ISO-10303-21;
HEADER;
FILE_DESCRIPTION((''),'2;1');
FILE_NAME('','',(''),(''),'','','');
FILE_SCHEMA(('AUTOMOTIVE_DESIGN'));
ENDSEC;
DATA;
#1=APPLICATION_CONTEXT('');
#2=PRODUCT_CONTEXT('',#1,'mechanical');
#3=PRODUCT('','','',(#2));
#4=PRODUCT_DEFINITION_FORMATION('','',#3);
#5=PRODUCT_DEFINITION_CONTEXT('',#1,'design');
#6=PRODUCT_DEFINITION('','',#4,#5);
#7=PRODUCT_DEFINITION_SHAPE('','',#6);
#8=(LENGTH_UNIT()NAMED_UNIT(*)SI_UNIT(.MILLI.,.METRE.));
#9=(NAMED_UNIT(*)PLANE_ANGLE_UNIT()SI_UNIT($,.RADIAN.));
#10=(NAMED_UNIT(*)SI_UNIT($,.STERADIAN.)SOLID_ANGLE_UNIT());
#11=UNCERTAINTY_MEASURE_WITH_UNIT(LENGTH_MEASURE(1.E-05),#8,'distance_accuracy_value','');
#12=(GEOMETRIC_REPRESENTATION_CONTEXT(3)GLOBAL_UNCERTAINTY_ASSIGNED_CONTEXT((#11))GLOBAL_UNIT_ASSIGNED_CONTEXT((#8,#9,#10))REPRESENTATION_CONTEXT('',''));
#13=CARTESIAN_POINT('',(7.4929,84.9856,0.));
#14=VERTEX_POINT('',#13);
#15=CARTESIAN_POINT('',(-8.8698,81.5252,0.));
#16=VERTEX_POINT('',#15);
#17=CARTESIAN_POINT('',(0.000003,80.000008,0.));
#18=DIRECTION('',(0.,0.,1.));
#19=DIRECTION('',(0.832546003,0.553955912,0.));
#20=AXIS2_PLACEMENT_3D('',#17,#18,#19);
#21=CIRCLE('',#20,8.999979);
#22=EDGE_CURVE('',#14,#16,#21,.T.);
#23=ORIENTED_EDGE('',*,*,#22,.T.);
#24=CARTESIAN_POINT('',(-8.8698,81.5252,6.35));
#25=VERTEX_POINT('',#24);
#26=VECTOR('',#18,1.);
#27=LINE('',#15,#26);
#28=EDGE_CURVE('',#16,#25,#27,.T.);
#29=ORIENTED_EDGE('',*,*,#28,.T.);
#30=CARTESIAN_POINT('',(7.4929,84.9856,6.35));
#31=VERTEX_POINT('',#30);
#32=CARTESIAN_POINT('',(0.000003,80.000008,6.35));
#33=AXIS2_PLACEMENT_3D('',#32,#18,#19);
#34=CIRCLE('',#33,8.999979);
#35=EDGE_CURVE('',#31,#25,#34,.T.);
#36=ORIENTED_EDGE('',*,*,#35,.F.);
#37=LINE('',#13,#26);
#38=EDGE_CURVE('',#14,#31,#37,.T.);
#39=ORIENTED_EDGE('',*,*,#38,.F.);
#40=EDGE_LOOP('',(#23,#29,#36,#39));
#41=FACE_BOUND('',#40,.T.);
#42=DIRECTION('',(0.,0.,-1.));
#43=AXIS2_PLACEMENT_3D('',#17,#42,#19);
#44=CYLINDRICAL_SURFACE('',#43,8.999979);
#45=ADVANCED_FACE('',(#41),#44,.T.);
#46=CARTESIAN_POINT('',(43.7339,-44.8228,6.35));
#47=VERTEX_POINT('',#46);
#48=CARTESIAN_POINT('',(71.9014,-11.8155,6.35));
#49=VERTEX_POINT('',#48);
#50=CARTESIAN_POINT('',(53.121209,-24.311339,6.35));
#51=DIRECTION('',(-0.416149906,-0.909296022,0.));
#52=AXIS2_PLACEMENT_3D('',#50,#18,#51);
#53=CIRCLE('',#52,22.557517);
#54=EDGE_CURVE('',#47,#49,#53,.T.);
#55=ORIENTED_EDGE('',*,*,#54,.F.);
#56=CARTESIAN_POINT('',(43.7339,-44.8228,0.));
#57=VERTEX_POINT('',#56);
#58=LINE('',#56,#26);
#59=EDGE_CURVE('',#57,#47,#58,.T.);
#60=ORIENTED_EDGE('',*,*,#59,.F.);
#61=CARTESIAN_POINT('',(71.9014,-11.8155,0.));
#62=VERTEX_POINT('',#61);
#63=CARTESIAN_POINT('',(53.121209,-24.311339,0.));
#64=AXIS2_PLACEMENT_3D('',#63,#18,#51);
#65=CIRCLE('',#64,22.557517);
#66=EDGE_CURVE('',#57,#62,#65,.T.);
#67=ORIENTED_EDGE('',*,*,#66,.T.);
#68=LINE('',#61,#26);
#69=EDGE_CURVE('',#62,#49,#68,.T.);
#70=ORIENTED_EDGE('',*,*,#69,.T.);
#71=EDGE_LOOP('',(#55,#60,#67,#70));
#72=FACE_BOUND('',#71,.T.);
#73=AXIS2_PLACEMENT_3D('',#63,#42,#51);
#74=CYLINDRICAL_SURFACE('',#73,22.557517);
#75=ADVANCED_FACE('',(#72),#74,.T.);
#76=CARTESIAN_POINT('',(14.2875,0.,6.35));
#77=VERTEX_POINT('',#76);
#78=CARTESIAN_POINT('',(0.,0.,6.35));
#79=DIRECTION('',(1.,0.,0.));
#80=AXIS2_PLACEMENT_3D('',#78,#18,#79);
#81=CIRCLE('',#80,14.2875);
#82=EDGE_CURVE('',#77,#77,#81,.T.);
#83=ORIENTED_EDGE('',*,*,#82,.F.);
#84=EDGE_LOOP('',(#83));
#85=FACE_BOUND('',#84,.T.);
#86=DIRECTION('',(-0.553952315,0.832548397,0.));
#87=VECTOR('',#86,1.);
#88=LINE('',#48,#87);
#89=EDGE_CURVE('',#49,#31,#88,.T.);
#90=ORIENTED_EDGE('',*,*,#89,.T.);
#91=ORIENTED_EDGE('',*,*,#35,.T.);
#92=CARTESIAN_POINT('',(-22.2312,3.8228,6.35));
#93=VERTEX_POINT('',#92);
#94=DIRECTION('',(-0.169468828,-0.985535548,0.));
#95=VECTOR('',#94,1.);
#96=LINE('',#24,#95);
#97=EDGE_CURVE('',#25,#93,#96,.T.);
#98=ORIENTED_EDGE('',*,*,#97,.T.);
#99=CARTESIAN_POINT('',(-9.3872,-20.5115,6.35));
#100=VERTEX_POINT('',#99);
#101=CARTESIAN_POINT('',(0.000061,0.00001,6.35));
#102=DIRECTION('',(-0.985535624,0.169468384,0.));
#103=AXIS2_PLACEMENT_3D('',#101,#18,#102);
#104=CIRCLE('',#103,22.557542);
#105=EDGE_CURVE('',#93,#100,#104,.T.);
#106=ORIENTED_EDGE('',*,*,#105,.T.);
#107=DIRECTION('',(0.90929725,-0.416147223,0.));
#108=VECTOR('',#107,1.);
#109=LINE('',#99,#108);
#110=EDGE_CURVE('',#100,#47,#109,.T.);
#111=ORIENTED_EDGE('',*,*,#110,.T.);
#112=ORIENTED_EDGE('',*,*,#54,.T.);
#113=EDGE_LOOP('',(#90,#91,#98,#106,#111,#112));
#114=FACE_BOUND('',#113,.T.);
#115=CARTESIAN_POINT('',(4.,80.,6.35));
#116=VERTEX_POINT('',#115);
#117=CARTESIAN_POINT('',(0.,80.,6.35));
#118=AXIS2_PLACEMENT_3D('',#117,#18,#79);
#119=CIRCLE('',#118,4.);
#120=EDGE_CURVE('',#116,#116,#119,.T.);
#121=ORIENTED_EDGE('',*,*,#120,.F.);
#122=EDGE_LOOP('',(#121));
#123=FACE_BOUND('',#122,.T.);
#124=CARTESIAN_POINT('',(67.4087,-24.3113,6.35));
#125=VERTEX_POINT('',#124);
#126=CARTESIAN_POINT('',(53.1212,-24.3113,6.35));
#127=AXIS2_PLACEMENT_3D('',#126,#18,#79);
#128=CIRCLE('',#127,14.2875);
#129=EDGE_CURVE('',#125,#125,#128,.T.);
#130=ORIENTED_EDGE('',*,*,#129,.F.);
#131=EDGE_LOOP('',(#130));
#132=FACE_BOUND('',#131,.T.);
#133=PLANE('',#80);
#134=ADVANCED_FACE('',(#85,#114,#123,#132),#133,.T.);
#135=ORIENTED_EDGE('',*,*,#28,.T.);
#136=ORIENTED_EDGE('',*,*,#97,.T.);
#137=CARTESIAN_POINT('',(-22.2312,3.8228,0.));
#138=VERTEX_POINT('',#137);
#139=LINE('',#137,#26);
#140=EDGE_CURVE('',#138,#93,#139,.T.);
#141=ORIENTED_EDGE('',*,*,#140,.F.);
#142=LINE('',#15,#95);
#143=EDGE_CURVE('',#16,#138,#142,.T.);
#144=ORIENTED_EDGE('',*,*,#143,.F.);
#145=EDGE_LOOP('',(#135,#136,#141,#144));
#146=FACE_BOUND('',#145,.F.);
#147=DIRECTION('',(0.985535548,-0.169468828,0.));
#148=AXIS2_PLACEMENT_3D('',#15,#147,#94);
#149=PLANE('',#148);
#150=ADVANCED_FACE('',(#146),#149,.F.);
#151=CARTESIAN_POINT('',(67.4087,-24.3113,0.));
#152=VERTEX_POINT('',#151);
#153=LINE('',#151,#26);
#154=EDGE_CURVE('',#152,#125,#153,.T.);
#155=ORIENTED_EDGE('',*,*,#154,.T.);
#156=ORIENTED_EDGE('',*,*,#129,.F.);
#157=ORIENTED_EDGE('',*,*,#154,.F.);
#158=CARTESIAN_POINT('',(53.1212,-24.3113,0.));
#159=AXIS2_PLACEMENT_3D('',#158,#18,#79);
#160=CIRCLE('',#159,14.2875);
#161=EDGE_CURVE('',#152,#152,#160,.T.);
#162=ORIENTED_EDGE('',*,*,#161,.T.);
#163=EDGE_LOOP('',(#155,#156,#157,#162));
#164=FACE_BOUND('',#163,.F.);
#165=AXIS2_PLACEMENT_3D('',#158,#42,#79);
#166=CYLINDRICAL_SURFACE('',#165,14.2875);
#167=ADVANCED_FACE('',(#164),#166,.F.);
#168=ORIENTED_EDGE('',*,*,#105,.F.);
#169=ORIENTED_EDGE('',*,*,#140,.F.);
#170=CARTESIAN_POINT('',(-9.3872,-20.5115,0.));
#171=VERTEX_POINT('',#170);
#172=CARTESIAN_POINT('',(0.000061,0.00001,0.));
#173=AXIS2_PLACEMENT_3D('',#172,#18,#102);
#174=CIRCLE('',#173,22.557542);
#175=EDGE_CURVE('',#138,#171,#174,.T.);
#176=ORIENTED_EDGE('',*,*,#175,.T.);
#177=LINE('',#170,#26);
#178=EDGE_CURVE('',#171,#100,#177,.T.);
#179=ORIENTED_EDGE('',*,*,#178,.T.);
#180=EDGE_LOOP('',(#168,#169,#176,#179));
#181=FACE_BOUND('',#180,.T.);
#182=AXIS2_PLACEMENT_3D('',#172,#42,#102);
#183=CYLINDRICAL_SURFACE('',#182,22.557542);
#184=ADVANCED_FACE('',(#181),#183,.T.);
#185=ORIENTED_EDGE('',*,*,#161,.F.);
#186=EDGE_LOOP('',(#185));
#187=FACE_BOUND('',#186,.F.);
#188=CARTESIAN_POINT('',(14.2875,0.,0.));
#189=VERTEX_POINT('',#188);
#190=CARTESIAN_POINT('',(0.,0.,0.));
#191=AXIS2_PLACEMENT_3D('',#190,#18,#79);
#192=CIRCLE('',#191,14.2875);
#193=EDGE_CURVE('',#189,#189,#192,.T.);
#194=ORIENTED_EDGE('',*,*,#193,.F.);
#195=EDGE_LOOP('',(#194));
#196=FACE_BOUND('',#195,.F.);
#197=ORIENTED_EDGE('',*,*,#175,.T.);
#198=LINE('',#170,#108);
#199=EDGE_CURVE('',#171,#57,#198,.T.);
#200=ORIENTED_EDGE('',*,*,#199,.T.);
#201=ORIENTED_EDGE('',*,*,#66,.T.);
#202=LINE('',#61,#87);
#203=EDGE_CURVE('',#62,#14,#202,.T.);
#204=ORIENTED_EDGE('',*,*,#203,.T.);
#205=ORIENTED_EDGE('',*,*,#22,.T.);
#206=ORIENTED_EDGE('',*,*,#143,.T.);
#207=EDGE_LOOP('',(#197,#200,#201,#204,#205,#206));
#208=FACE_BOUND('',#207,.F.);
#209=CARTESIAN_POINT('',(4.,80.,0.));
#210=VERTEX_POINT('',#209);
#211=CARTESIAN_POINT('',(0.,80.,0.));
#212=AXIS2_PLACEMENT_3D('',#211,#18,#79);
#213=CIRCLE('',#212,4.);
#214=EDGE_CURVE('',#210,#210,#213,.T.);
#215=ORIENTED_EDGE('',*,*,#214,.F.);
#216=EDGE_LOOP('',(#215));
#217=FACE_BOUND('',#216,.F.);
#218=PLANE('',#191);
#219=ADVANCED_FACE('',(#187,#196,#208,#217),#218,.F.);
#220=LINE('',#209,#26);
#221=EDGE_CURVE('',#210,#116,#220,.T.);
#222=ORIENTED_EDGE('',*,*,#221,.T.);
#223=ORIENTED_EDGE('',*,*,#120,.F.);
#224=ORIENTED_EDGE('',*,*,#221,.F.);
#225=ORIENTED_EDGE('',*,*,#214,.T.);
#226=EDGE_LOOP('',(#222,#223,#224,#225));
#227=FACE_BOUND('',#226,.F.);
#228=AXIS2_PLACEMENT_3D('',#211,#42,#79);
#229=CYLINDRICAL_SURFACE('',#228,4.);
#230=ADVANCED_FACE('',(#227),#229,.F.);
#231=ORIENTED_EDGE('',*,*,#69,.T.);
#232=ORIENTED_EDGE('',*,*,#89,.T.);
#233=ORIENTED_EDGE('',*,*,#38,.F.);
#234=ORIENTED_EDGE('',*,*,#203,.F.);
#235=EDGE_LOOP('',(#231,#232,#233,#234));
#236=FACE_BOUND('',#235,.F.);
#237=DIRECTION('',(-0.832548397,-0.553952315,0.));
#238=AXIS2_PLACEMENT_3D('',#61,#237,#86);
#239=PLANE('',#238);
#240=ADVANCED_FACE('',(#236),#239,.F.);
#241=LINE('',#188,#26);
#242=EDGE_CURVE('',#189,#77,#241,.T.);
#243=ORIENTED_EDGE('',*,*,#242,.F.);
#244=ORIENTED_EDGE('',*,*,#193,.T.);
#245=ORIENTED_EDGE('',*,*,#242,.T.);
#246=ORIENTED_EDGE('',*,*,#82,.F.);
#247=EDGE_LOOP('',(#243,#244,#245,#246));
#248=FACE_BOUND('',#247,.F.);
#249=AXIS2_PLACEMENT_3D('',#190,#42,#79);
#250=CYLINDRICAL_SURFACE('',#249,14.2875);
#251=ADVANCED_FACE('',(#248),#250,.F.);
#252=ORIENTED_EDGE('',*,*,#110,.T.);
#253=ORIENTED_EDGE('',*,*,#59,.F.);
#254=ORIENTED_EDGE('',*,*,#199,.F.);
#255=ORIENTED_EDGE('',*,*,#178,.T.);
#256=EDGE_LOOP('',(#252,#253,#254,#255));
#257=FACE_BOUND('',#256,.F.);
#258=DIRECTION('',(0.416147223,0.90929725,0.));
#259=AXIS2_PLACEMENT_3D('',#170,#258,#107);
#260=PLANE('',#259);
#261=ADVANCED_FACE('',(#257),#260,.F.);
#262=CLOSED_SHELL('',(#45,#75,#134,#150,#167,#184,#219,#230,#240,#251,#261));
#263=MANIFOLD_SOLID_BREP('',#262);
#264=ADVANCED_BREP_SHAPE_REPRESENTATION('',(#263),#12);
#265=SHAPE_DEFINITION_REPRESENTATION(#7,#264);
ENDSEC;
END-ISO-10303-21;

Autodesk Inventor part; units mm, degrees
ref_plane "YZ Plane" through (0, 0, 0) normal (1, 0, 0) x (0, 1, 0)
ref_plane "XZ Plane" through (0, 0, 0) normal (0, 1, 0) x (-1, 0, 0)
ref_plane "XY Plane" through (0, 0, 0) normal (0, 0, 1) x (1, 0, 0)
sketch "Sketch1" plane through (0, 0, 0) normal (0, 0, 1) x (1, 0, 0)
  circle A0 centre (0, 0) radius 14.2875
  circle A1 centre (53.1212, -24.3113) radius 14.2875
  circle A2 centre (0, 80) radius 4
  line L0 (0, 80) -> (0, 0) construction
  line L1 (0, 0) -> (53.1212, -24.3113) construction
  circle A3 centre (53.1212, -24.3113) radius 15.5575
  circle A4 centre (0, 0) radius 15.5575
  arc A5 (43.7339, -44.8228) -> (71.9014, -11.8155) centre (53.1212, -24.3113) ccw
  arc A6 (-22.2312, 3.8228) -> (-9.3872, -20.5115) centre (0, 0) ccw
  arc A7 (7.4929, 84.9856) -> (-8.8698, 81.5252) centre (0, 80) ccw
  line L2 (-8.8698, 81.5252) -> (-22.2312, 3.8228)
  line L3 (-9.3872, -20.5115) -> (43.7339, -44.8228)
  line L4 (71.9014, -11.8155) -> (7.4929, 84.9856)
  dimension "d0" = 8
  dimension "d1" = 28.575
  dimension "d4" = 28.575
  dimension "d5" = 58.42
  dimension "d6" = 114.592
  dimension "d7" = 80
  dimension "d8" = 31.115
  dimension "d9" = 31.115
  dimension "d10" = 5
  dimension "d11" = 7
  dimension "d13" = 7
extrude "Extrusion1" add sketch "Sketch1" along normal blind 6.35 contours A3 | A4 | L3 A6 L2 A7 L4 A5
equation "\"d4\" = d1"
equation "\"d6\" = d2"
equation "\"d9\" = d8"
equation "\"d13\" = d11"
equation "\"d2\" = 114.591559deg"
properties part number "sussy pivot"
